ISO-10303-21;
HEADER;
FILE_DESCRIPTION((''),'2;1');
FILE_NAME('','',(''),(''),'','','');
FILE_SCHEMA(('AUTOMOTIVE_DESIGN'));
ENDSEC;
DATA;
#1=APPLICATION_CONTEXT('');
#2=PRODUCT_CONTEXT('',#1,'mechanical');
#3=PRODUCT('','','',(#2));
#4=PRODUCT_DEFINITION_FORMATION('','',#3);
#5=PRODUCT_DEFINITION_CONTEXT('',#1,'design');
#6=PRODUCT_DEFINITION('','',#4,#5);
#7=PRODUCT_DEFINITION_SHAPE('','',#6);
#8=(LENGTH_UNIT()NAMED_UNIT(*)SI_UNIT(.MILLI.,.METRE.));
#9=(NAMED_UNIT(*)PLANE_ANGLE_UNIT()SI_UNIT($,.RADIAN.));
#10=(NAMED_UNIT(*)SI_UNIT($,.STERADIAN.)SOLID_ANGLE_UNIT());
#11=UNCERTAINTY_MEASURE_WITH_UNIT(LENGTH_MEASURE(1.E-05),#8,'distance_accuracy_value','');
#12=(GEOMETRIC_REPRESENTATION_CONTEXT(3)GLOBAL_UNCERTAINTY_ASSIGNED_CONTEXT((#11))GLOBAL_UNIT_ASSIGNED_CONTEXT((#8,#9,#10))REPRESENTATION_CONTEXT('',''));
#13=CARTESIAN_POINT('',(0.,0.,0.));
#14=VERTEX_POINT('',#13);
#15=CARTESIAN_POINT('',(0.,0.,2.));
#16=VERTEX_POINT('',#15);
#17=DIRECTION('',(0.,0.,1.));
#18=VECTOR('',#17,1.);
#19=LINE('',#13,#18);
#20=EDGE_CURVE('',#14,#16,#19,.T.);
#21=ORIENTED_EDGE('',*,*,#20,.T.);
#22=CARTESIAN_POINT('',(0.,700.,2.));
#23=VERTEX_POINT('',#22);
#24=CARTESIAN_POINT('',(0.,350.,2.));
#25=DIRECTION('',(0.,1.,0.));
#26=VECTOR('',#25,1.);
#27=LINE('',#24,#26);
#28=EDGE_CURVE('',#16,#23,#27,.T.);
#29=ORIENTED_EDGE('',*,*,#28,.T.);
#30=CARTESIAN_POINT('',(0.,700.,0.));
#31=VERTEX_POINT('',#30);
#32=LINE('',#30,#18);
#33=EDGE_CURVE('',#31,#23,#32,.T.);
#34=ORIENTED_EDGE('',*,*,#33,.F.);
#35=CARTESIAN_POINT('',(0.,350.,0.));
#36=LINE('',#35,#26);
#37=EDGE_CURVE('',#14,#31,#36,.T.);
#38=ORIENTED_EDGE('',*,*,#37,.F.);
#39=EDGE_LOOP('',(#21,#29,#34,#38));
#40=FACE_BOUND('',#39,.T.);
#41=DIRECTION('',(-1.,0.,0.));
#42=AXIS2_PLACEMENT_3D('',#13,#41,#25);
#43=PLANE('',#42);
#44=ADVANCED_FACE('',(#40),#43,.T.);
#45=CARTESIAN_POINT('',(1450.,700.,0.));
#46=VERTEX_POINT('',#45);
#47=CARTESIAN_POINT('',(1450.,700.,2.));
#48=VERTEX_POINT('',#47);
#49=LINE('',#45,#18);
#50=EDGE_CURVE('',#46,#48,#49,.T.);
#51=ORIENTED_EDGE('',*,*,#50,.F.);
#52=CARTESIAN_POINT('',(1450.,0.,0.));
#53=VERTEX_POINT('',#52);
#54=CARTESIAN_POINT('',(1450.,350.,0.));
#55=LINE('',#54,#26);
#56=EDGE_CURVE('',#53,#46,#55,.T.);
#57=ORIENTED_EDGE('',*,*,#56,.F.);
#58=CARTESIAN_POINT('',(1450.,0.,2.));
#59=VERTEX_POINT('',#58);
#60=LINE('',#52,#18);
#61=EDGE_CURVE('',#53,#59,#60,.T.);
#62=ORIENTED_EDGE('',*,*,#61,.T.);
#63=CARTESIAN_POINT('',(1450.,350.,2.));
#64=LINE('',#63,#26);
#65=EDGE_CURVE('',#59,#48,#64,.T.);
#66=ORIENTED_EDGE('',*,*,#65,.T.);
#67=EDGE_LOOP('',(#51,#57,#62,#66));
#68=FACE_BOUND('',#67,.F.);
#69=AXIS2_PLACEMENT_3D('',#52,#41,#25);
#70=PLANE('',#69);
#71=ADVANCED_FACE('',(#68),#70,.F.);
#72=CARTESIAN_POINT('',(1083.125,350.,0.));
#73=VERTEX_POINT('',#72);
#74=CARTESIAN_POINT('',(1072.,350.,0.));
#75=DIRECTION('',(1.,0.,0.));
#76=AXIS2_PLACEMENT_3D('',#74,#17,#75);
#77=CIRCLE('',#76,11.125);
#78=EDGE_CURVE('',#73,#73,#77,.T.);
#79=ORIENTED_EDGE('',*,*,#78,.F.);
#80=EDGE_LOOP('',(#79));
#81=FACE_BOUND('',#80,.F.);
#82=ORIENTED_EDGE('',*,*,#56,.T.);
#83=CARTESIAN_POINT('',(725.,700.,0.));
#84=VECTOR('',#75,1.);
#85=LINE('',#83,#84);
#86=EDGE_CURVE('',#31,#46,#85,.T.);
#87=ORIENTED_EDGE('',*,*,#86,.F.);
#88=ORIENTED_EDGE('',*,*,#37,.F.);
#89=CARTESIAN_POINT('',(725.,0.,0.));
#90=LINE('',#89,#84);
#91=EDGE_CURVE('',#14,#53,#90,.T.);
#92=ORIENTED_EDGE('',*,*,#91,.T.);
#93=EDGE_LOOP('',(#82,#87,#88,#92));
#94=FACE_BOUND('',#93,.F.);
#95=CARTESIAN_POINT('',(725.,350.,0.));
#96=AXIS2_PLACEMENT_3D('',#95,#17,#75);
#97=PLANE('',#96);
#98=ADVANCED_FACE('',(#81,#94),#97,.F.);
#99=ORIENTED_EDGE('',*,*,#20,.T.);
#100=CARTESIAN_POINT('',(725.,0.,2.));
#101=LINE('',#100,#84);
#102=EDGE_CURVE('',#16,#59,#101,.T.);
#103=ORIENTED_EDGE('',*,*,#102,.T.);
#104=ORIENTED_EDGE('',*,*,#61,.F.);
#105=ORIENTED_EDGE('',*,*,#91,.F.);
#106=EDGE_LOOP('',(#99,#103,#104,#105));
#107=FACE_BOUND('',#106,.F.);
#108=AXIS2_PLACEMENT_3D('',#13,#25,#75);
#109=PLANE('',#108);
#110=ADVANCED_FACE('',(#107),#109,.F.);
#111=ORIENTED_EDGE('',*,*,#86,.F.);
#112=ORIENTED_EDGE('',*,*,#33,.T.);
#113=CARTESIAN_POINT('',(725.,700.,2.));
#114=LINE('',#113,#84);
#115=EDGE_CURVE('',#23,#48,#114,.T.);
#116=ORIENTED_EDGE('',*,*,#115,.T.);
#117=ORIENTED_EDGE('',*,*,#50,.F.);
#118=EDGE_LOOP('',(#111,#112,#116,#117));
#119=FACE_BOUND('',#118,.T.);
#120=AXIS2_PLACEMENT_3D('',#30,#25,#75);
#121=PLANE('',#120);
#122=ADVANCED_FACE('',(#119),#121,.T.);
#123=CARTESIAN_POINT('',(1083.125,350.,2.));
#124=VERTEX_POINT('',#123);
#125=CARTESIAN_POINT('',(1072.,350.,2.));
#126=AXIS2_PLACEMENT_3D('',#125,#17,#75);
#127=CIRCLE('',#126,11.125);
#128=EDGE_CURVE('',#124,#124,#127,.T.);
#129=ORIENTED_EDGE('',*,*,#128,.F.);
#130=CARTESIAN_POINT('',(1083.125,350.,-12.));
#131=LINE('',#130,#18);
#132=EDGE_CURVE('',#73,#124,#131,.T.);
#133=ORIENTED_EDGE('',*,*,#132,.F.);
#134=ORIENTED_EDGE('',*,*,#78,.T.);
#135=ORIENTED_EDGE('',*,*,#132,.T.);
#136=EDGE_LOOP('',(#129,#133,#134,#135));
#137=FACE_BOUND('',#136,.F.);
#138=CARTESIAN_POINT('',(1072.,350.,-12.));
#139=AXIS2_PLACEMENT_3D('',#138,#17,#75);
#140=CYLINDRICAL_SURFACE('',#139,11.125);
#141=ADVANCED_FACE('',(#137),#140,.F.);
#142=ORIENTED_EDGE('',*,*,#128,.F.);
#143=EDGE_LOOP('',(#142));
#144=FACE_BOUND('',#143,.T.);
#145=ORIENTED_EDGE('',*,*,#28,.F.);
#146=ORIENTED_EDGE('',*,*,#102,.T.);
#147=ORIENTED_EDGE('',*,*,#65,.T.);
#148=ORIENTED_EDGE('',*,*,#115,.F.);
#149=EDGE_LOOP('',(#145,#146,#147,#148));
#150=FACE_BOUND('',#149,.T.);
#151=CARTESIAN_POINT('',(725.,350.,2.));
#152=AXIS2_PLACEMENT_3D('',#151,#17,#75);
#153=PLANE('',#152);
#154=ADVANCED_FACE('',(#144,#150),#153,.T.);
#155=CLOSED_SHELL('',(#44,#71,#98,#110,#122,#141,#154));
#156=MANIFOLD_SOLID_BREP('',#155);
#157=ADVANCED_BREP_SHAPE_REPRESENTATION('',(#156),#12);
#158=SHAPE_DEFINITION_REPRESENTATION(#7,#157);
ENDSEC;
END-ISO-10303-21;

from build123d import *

# Parameters (mm, degrees)
F0_W           = 1450
F0_H           = 700
F1_DEPTH       = 2
F3_D           = 15.5
F3_DEPTH       = 14
F3_CBORE_D     = 22.25
F3_CBORE_DEPTH = 14
F3_TIP         = 4.6566697975


with BuildPart() as f1:
    # F0 (on Top) → F1 (new body)
    with BuildSketch(Plane.XY):
        with Locations((725, 350)):
            Rectangle(F0_W, F0_H)
    extrude(amount=F1_DEPTH)

    # F3
    with Locations(Plane.XY.offset(2)):
        with Locations((1072, 350)):
            CounterBoreHole(F3_D / 2, F3_CBORE_D / 2, F3_CBORE_DEPTH, depth=F3_DEPTH)
            with Locations((0, 0, -(F3_DEPTH + F3_TIP / 2))):  # 118° drill point
                Cone(0, F3_D / 2, F3_TIP, mode=Mode.SUBTRACT)


solid = f1.part
